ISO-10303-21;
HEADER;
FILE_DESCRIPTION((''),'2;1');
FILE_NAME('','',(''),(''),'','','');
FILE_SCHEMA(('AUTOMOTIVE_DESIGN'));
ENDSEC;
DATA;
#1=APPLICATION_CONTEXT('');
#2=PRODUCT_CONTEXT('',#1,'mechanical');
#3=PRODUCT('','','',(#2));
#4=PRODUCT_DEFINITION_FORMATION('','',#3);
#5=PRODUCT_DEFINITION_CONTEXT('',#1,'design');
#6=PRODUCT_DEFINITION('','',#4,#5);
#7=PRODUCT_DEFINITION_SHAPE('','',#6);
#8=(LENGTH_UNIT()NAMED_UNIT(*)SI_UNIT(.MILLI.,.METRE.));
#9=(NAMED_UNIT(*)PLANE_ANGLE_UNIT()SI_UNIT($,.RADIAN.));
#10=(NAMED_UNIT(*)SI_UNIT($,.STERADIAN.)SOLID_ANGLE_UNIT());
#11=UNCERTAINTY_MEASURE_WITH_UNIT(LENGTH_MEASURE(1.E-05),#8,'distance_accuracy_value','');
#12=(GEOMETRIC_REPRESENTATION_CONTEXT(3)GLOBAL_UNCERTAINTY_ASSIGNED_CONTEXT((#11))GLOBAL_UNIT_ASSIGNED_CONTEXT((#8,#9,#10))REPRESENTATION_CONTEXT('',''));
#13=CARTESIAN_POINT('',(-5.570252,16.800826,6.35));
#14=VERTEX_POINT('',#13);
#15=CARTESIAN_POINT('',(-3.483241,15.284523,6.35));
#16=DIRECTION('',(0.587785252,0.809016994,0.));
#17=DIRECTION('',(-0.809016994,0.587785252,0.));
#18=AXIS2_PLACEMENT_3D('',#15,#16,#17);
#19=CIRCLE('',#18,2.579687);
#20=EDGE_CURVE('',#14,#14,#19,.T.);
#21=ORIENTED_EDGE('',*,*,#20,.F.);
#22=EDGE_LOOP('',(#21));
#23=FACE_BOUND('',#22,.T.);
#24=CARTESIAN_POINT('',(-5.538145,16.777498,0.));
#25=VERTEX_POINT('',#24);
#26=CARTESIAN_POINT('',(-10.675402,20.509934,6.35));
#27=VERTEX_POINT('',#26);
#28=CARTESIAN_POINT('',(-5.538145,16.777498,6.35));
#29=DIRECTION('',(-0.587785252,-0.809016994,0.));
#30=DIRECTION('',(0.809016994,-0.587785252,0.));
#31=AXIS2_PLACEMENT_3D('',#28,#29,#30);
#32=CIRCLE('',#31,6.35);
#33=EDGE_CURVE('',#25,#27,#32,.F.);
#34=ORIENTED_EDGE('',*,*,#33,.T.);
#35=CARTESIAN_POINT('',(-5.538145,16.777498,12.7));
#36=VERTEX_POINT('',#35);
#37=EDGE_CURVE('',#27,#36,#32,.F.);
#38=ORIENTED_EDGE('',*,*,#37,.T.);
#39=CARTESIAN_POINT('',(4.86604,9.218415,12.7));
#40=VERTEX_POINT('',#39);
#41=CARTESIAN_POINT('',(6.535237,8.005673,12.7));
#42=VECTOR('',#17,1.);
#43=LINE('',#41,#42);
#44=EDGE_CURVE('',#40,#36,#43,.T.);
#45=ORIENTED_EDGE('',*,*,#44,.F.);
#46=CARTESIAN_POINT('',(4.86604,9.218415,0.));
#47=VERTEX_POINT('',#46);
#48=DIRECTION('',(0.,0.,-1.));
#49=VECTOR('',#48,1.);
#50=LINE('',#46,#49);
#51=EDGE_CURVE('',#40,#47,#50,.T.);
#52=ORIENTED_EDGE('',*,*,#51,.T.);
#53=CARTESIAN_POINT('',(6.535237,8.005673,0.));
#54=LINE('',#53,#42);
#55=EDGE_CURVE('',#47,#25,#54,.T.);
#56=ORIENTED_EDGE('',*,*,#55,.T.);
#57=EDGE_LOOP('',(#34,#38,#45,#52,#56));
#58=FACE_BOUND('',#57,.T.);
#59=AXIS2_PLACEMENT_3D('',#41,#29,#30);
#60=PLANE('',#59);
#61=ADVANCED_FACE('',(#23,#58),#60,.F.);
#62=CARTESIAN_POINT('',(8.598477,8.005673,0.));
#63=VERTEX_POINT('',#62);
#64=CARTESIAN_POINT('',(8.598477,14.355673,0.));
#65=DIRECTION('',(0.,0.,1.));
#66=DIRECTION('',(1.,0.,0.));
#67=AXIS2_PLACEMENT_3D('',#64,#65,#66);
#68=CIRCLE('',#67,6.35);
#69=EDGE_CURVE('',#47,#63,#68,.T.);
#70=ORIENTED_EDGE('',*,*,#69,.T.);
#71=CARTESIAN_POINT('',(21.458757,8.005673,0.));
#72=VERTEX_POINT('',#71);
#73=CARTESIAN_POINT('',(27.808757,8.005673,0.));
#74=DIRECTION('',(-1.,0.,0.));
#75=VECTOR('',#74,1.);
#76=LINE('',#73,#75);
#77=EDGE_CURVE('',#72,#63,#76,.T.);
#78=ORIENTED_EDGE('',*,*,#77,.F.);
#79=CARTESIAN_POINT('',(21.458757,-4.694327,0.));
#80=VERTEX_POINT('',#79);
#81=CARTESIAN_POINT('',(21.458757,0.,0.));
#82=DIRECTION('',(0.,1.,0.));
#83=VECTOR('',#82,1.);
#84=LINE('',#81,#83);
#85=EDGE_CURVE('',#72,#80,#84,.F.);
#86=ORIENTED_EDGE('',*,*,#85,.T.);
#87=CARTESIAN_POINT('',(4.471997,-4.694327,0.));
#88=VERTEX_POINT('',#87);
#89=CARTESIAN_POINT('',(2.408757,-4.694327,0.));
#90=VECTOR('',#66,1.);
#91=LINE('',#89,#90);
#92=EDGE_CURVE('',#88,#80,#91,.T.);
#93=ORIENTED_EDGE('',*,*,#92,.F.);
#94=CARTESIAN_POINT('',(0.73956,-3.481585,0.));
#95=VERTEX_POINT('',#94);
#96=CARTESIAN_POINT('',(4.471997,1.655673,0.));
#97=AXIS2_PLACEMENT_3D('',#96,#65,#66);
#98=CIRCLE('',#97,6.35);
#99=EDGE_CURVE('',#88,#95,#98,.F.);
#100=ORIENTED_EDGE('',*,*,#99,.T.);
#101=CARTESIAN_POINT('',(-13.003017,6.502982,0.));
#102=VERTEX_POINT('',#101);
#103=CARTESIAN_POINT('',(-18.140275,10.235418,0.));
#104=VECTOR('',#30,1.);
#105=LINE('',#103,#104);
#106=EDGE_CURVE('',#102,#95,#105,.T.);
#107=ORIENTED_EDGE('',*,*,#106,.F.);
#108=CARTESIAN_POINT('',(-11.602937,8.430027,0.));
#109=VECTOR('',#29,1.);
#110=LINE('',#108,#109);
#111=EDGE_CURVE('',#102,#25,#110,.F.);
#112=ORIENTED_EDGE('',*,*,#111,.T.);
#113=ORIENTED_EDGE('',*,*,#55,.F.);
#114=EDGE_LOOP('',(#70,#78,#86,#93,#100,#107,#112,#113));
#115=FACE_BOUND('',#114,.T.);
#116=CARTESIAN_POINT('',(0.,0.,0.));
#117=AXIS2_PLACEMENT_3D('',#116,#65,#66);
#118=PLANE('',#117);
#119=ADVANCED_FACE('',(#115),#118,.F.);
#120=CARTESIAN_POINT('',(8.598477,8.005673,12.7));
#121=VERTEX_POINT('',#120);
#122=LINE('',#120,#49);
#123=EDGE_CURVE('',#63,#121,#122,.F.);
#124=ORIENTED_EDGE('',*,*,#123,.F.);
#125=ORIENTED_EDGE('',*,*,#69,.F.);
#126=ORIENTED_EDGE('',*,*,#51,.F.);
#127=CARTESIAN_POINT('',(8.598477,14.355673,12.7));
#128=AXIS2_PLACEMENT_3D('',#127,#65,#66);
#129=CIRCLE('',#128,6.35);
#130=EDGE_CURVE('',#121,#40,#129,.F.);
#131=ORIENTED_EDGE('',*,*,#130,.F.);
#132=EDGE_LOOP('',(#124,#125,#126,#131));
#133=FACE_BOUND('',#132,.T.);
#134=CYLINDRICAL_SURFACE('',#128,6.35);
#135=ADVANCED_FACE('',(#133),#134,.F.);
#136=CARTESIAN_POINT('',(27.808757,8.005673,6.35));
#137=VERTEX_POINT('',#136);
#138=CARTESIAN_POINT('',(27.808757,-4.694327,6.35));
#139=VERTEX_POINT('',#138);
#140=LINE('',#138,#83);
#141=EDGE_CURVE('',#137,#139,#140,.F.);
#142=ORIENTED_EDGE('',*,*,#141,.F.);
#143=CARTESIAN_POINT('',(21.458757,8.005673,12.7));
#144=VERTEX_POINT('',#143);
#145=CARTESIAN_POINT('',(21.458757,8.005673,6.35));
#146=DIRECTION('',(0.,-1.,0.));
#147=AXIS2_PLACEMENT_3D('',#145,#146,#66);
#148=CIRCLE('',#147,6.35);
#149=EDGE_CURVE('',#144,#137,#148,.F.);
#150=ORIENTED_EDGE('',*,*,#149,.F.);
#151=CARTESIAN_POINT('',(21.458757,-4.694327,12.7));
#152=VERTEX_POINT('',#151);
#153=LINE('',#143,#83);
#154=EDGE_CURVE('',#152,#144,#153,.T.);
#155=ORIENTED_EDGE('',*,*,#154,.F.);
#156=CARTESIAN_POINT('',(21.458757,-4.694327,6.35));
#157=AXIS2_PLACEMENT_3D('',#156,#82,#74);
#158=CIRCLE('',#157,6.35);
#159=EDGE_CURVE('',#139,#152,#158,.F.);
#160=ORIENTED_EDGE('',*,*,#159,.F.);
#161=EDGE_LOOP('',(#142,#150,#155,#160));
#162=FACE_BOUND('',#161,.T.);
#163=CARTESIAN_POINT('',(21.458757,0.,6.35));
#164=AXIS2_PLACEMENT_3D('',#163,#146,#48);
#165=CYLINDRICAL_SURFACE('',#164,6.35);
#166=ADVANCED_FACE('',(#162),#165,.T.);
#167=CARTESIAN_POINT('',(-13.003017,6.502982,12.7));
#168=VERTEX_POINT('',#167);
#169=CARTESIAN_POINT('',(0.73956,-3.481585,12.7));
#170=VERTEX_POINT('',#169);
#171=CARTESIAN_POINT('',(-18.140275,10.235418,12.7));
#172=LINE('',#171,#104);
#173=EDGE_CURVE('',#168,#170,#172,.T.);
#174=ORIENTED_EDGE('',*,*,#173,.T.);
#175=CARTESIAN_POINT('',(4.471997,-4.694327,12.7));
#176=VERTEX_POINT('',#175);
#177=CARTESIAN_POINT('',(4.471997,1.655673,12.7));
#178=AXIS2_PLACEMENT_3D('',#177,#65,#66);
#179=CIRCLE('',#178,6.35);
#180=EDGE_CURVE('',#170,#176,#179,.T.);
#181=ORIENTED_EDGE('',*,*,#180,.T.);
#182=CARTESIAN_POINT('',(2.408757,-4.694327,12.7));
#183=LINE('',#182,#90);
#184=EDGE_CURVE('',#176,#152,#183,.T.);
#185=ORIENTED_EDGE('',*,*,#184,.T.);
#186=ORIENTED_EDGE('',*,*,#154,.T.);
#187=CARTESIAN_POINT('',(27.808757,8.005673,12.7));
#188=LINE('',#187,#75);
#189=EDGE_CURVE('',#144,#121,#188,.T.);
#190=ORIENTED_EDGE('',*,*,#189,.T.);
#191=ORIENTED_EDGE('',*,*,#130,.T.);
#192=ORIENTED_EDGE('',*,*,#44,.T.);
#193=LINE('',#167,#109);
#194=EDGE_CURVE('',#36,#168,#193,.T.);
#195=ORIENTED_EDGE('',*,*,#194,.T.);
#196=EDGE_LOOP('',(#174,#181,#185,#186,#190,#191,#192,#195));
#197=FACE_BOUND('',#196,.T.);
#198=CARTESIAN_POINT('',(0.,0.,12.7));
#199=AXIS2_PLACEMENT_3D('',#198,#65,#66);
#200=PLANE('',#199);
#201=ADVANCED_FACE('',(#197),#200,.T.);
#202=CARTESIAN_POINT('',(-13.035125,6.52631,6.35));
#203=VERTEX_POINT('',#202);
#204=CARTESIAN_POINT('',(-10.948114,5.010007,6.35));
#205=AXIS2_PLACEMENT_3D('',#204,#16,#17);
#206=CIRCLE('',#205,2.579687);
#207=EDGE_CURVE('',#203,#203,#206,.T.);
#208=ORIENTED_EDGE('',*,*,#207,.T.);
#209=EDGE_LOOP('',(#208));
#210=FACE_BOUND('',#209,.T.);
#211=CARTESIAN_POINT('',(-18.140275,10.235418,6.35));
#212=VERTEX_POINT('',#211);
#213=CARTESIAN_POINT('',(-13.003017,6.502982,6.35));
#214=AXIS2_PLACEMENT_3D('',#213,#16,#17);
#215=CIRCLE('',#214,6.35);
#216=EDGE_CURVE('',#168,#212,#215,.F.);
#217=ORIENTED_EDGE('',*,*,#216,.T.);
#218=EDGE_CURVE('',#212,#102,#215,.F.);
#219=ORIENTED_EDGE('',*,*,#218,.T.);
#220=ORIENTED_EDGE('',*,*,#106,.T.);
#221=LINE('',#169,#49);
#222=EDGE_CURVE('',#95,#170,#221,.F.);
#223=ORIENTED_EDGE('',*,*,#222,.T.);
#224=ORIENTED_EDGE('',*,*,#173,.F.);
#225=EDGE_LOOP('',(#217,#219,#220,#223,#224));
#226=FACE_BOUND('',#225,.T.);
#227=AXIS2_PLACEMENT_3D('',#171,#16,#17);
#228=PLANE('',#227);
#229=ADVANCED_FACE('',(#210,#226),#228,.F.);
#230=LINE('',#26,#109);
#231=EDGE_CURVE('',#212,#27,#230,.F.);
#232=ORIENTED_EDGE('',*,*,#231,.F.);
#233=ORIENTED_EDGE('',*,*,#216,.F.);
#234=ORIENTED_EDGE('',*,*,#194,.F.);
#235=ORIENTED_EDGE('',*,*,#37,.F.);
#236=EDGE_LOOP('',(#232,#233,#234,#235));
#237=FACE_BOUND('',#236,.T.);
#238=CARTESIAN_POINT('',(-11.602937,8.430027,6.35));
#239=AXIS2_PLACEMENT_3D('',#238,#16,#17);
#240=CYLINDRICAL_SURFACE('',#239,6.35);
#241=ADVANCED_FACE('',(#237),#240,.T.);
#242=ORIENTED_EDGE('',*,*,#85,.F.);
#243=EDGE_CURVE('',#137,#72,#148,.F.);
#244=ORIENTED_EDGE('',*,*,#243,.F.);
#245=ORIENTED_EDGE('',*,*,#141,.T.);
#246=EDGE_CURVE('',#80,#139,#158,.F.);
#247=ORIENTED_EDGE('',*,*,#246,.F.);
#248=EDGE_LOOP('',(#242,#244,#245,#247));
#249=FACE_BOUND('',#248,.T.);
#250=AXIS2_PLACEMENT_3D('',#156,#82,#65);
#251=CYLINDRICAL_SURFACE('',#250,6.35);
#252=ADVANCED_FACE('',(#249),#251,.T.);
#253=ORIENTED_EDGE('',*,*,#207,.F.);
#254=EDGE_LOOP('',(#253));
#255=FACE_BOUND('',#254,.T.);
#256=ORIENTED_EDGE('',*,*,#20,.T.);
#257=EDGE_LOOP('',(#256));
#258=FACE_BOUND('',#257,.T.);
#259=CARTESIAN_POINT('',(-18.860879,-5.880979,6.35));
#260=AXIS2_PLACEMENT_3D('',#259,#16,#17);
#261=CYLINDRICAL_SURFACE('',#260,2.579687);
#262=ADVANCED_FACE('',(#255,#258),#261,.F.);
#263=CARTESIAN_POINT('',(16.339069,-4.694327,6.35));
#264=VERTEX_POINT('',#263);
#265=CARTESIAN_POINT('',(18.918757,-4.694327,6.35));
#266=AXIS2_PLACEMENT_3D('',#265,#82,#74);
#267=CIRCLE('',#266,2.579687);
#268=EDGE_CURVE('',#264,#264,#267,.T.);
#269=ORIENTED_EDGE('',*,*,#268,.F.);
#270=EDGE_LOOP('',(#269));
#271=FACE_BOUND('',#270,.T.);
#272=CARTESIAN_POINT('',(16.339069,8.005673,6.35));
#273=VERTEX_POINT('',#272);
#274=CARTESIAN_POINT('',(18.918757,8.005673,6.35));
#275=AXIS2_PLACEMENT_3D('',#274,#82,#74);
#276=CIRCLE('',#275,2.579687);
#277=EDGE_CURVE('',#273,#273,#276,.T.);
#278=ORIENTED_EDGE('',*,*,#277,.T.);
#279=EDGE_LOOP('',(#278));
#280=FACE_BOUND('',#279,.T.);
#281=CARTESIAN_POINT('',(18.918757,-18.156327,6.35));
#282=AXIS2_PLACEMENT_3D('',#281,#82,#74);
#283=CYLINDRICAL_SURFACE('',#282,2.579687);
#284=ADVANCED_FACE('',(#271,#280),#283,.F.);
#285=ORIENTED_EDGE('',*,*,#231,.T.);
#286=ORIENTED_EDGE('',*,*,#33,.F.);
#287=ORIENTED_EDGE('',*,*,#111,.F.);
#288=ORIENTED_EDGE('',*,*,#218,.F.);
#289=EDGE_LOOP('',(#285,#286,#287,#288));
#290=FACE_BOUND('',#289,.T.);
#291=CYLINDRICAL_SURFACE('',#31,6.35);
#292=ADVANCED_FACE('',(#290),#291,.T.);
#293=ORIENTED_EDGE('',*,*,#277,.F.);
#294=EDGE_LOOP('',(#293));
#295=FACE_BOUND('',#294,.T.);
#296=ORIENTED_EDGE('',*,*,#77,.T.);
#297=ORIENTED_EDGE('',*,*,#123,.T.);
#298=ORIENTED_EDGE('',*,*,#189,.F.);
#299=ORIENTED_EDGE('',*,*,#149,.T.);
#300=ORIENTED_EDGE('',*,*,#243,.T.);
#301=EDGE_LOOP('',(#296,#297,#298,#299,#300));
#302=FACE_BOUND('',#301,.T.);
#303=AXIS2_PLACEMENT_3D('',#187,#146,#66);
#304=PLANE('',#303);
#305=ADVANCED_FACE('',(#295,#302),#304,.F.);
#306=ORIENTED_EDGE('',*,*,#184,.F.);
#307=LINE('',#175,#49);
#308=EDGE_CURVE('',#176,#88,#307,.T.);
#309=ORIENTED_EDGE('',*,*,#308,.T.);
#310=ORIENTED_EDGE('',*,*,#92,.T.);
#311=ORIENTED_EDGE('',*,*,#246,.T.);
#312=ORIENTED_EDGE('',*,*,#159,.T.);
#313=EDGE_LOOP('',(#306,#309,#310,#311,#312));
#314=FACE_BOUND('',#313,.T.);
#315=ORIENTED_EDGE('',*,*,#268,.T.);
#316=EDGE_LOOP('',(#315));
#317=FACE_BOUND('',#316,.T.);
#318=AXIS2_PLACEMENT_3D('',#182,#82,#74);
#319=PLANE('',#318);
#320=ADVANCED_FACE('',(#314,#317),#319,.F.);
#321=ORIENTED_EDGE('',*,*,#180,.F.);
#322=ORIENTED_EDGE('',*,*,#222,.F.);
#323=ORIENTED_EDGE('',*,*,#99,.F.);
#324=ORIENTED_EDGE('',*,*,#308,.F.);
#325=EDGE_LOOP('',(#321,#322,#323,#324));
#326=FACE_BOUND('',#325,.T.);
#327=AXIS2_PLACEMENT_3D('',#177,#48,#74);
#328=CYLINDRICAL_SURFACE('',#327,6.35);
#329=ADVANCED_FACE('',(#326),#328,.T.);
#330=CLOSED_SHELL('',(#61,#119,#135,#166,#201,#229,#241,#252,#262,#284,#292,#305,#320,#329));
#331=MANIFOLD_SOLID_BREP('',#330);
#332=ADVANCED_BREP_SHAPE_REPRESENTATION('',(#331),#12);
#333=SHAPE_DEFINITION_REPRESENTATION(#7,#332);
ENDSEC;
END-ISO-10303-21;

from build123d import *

# Parameters (mm, degrees)
BOSS_EXTRUDE1_DEPTH = 12.7
SKETCH2_R           = 2.5796875
CUT_EXTRUDE1_DEPTH  = 26.162
SKETCH3_R           = 2.5796875
CUT_EXTRUDE2_DEPTH  = 26.162
FILLET1_R           = 6.35
FILLET2_R           = 6.35


with BuildPart() as part:
    # Sketch1 → Boss-Extrude1 (new body)
    with BuildSketch(Plane.XY):
        Polygon((27.808756526, 8.005672944), (6.535236668, 8.005672944), (-10.675402427, 20.509934181), (-18.140275131, 10.235418352), (2.408756526, -4.694327056), (27.808756526, -4.694327056), align=None)
    extrude(amount=BOSS_EXTRUDE1_DEPTH)

    # Sketch2 → Cut-Extrude1 (cut)
    with BuildSketch(Plane(origin=(0, 8.005672944, 0), x_dir=(1, 0, 0), z_dir=(0, 1, 0))):
        with Locations(Location((18.918756526, -6.35, 0), (0, 0, 180))):
            Circle(SKETCH2_R)
    extrude(amount=-CUT_EXTRUDE1_DEPTH, mode=Mode.SUBTRACT)

    # Sketch3 → Cut-Extrude2 (cut)
    with BuildSketch(Plane(origin=(6.064792448, 8.347470677, 0), x_dir=(0.809016994374947, -0.5877852522924737, 0), z_dir=(0.5877852522924737, 0.809016994374947, 0))):
        with Locations(Location((-11.802018822, -6.35, 0), (0, 0, 180))):
            Circle(SKETCH3_R)
    extrude(amount=-CUT_EXTRUDE2_DEPTH, mode=Mode.SUBTRACT)

    # Fillet1
    fillet1_edges = [part.edges().sort_by_distance(p)[0] for p in [
        (-14.407838779, 15.372676266, 0),
        (-14.407838779, 15.372676266, 12.7),
        (27.808756526, 1.655672944, 0),
        (27.808756526, 1.655672944, 12.7),
    ]]
    fillet(fillet1_edges, radius=FILLET1_R - 0.0001)  # a hair under: the kernel refuses the full size

    # Fillet2
    fillet2_edges = [part.edges().sort_by_distance(p)[0] for p in [
        (2.408756526, -4.694327056, 6.35),
        (6.535236668, 8.005672944, 6.35),
    ]]
    fillet(fillet2_edges, radius=FILLET2_R)


solid = part.part
